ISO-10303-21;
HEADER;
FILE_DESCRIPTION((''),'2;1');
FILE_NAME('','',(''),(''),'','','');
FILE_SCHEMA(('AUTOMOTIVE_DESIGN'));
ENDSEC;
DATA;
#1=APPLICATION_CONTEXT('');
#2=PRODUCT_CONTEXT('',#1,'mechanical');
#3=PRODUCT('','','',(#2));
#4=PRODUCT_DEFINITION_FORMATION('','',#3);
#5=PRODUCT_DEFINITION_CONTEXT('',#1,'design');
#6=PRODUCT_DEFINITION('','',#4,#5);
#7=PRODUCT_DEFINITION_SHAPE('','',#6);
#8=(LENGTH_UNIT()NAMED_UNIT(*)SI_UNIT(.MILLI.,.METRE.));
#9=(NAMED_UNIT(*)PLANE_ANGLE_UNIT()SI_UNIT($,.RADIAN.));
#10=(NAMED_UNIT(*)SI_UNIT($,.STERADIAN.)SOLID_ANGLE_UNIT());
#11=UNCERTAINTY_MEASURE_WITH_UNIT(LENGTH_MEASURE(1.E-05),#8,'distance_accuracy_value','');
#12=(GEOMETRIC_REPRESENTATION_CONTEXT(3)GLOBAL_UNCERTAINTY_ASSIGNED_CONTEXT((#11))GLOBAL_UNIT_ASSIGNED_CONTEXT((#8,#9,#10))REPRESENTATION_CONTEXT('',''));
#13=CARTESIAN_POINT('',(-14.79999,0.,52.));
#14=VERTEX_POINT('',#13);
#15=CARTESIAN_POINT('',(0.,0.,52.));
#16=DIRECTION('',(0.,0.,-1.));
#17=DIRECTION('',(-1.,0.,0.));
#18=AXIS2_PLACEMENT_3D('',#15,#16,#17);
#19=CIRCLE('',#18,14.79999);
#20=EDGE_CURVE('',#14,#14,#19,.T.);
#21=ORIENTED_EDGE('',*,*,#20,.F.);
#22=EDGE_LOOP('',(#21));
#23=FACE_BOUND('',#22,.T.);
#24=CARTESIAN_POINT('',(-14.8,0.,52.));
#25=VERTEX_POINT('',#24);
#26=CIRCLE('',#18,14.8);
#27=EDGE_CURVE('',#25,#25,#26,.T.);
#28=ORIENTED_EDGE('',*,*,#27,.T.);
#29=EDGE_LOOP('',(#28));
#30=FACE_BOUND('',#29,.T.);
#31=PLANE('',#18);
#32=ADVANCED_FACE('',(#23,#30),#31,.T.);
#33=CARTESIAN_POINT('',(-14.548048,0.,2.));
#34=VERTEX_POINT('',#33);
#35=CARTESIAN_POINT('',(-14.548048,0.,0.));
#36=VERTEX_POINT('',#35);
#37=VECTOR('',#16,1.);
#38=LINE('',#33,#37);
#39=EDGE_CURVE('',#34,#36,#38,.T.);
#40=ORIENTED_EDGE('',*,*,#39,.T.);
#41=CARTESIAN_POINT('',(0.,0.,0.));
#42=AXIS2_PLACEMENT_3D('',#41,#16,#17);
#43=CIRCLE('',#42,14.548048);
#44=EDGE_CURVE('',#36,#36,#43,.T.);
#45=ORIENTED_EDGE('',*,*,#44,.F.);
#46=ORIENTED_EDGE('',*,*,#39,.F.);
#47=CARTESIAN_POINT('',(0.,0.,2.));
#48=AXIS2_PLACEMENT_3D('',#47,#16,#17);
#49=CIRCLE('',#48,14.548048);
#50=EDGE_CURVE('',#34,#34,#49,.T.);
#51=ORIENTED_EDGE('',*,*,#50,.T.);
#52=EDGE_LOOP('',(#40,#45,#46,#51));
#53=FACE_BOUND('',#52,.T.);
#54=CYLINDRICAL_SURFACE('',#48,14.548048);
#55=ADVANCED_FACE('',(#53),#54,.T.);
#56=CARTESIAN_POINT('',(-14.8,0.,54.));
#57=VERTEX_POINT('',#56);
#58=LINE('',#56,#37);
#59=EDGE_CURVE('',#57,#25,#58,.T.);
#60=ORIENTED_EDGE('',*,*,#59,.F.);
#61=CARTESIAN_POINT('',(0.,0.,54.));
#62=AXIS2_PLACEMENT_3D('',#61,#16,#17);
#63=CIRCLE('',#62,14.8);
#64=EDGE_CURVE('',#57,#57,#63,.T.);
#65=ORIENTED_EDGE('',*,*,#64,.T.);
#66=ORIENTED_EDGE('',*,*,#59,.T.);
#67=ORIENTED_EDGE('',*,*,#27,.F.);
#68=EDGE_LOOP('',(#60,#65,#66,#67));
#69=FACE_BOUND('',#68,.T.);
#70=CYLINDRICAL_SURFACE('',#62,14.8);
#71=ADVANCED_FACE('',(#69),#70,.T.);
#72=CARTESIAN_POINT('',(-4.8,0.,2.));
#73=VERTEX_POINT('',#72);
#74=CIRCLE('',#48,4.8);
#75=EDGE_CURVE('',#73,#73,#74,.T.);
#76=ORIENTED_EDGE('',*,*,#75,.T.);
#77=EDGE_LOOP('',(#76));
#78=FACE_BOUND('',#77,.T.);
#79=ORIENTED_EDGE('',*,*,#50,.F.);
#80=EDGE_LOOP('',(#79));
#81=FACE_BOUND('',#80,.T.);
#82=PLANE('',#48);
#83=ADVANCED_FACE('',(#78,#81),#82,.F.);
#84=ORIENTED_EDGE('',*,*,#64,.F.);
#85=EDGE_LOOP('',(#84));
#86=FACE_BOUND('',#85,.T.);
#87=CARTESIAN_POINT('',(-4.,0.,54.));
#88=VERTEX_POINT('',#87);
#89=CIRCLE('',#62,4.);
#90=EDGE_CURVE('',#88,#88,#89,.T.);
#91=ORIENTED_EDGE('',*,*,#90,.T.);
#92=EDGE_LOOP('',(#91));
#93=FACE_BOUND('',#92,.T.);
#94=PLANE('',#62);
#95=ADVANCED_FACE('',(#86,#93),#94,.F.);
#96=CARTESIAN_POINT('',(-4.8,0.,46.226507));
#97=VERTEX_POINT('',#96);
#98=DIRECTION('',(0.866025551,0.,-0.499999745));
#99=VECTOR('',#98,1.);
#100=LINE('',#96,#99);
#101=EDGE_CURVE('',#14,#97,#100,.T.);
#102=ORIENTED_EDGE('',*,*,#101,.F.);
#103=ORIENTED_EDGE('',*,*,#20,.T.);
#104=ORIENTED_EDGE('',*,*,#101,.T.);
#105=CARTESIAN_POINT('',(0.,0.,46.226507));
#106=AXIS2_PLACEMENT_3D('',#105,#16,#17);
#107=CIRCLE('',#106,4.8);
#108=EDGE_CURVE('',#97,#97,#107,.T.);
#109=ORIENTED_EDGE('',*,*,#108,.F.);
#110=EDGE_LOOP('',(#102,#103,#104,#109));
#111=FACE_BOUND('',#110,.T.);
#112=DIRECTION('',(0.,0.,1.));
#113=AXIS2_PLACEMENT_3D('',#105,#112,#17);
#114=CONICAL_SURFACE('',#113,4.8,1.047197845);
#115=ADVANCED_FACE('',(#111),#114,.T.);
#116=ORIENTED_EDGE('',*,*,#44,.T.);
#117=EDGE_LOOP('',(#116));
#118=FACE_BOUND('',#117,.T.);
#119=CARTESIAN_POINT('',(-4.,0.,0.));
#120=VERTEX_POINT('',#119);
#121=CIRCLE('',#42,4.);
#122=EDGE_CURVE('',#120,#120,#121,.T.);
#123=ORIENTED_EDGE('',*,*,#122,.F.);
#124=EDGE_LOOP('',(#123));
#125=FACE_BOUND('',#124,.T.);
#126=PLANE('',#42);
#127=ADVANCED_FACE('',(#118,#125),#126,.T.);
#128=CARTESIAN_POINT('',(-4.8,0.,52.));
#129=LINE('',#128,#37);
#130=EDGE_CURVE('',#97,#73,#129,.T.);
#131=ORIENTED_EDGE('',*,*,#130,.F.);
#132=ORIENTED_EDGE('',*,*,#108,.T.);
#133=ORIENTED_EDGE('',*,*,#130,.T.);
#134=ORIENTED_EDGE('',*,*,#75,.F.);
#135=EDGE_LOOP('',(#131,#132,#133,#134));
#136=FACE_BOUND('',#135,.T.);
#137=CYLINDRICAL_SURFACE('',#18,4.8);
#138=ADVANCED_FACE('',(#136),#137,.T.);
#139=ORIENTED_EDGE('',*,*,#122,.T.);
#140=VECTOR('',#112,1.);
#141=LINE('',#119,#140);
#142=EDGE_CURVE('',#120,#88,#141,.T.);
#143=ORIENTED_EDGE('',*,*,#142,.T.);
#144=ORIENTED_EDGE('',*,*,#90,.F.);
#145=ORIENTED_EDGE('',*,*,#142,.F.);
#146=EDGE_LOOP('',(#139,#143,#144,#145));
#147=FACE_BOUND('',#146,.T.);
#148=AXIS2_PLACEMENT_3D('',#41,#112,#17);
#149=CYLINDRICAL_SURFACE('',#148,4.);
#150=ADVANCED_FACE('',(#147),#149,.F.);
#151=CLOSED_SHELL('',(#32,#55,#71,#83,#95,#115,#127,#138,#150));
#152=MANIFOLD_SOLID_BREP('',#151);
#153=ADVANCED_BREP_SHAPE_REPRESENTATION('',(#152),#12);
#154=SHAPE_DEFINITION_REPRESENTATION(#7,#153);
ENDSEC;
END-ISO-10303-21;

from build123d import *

# Parameters (mm, degrees)
F2_SIZE2 = 5.773493
F2_SIZE  = 9.99999


# Not quite as in the source:
# - a fillet or chamfer is up to 0.001 mm smaller than in the source, because OpenCascade refuses the exact size


with BuildPart() as f1:
    # F0 (on Front) → F1 (revolve)
    with BuildSketch(Plane.XZ):
        Polygon((-14.5480483851, 0), (-4, 0), (-4, 54), (-14.8, 54), (-14.8, 52), (-4.8, 52), (-4.8, 2), (-14.5480483851, 2), align=None)
    revolve(axis=Axis((0, 0, 27), (0, 0, -1)))

    # F2 (size 10 and 5.7735026919 in the source; OpenCascade refuses exactly that, so slightly less here)
    f2_edges = [f1.edges().sort_by_distance(p)[0] for p in [
        (4.8, 0, 52),
    ]]
    chamfer(f2_edges, length=F2_SIZE, length2=F2_SIZE2)


solid = f1.part
